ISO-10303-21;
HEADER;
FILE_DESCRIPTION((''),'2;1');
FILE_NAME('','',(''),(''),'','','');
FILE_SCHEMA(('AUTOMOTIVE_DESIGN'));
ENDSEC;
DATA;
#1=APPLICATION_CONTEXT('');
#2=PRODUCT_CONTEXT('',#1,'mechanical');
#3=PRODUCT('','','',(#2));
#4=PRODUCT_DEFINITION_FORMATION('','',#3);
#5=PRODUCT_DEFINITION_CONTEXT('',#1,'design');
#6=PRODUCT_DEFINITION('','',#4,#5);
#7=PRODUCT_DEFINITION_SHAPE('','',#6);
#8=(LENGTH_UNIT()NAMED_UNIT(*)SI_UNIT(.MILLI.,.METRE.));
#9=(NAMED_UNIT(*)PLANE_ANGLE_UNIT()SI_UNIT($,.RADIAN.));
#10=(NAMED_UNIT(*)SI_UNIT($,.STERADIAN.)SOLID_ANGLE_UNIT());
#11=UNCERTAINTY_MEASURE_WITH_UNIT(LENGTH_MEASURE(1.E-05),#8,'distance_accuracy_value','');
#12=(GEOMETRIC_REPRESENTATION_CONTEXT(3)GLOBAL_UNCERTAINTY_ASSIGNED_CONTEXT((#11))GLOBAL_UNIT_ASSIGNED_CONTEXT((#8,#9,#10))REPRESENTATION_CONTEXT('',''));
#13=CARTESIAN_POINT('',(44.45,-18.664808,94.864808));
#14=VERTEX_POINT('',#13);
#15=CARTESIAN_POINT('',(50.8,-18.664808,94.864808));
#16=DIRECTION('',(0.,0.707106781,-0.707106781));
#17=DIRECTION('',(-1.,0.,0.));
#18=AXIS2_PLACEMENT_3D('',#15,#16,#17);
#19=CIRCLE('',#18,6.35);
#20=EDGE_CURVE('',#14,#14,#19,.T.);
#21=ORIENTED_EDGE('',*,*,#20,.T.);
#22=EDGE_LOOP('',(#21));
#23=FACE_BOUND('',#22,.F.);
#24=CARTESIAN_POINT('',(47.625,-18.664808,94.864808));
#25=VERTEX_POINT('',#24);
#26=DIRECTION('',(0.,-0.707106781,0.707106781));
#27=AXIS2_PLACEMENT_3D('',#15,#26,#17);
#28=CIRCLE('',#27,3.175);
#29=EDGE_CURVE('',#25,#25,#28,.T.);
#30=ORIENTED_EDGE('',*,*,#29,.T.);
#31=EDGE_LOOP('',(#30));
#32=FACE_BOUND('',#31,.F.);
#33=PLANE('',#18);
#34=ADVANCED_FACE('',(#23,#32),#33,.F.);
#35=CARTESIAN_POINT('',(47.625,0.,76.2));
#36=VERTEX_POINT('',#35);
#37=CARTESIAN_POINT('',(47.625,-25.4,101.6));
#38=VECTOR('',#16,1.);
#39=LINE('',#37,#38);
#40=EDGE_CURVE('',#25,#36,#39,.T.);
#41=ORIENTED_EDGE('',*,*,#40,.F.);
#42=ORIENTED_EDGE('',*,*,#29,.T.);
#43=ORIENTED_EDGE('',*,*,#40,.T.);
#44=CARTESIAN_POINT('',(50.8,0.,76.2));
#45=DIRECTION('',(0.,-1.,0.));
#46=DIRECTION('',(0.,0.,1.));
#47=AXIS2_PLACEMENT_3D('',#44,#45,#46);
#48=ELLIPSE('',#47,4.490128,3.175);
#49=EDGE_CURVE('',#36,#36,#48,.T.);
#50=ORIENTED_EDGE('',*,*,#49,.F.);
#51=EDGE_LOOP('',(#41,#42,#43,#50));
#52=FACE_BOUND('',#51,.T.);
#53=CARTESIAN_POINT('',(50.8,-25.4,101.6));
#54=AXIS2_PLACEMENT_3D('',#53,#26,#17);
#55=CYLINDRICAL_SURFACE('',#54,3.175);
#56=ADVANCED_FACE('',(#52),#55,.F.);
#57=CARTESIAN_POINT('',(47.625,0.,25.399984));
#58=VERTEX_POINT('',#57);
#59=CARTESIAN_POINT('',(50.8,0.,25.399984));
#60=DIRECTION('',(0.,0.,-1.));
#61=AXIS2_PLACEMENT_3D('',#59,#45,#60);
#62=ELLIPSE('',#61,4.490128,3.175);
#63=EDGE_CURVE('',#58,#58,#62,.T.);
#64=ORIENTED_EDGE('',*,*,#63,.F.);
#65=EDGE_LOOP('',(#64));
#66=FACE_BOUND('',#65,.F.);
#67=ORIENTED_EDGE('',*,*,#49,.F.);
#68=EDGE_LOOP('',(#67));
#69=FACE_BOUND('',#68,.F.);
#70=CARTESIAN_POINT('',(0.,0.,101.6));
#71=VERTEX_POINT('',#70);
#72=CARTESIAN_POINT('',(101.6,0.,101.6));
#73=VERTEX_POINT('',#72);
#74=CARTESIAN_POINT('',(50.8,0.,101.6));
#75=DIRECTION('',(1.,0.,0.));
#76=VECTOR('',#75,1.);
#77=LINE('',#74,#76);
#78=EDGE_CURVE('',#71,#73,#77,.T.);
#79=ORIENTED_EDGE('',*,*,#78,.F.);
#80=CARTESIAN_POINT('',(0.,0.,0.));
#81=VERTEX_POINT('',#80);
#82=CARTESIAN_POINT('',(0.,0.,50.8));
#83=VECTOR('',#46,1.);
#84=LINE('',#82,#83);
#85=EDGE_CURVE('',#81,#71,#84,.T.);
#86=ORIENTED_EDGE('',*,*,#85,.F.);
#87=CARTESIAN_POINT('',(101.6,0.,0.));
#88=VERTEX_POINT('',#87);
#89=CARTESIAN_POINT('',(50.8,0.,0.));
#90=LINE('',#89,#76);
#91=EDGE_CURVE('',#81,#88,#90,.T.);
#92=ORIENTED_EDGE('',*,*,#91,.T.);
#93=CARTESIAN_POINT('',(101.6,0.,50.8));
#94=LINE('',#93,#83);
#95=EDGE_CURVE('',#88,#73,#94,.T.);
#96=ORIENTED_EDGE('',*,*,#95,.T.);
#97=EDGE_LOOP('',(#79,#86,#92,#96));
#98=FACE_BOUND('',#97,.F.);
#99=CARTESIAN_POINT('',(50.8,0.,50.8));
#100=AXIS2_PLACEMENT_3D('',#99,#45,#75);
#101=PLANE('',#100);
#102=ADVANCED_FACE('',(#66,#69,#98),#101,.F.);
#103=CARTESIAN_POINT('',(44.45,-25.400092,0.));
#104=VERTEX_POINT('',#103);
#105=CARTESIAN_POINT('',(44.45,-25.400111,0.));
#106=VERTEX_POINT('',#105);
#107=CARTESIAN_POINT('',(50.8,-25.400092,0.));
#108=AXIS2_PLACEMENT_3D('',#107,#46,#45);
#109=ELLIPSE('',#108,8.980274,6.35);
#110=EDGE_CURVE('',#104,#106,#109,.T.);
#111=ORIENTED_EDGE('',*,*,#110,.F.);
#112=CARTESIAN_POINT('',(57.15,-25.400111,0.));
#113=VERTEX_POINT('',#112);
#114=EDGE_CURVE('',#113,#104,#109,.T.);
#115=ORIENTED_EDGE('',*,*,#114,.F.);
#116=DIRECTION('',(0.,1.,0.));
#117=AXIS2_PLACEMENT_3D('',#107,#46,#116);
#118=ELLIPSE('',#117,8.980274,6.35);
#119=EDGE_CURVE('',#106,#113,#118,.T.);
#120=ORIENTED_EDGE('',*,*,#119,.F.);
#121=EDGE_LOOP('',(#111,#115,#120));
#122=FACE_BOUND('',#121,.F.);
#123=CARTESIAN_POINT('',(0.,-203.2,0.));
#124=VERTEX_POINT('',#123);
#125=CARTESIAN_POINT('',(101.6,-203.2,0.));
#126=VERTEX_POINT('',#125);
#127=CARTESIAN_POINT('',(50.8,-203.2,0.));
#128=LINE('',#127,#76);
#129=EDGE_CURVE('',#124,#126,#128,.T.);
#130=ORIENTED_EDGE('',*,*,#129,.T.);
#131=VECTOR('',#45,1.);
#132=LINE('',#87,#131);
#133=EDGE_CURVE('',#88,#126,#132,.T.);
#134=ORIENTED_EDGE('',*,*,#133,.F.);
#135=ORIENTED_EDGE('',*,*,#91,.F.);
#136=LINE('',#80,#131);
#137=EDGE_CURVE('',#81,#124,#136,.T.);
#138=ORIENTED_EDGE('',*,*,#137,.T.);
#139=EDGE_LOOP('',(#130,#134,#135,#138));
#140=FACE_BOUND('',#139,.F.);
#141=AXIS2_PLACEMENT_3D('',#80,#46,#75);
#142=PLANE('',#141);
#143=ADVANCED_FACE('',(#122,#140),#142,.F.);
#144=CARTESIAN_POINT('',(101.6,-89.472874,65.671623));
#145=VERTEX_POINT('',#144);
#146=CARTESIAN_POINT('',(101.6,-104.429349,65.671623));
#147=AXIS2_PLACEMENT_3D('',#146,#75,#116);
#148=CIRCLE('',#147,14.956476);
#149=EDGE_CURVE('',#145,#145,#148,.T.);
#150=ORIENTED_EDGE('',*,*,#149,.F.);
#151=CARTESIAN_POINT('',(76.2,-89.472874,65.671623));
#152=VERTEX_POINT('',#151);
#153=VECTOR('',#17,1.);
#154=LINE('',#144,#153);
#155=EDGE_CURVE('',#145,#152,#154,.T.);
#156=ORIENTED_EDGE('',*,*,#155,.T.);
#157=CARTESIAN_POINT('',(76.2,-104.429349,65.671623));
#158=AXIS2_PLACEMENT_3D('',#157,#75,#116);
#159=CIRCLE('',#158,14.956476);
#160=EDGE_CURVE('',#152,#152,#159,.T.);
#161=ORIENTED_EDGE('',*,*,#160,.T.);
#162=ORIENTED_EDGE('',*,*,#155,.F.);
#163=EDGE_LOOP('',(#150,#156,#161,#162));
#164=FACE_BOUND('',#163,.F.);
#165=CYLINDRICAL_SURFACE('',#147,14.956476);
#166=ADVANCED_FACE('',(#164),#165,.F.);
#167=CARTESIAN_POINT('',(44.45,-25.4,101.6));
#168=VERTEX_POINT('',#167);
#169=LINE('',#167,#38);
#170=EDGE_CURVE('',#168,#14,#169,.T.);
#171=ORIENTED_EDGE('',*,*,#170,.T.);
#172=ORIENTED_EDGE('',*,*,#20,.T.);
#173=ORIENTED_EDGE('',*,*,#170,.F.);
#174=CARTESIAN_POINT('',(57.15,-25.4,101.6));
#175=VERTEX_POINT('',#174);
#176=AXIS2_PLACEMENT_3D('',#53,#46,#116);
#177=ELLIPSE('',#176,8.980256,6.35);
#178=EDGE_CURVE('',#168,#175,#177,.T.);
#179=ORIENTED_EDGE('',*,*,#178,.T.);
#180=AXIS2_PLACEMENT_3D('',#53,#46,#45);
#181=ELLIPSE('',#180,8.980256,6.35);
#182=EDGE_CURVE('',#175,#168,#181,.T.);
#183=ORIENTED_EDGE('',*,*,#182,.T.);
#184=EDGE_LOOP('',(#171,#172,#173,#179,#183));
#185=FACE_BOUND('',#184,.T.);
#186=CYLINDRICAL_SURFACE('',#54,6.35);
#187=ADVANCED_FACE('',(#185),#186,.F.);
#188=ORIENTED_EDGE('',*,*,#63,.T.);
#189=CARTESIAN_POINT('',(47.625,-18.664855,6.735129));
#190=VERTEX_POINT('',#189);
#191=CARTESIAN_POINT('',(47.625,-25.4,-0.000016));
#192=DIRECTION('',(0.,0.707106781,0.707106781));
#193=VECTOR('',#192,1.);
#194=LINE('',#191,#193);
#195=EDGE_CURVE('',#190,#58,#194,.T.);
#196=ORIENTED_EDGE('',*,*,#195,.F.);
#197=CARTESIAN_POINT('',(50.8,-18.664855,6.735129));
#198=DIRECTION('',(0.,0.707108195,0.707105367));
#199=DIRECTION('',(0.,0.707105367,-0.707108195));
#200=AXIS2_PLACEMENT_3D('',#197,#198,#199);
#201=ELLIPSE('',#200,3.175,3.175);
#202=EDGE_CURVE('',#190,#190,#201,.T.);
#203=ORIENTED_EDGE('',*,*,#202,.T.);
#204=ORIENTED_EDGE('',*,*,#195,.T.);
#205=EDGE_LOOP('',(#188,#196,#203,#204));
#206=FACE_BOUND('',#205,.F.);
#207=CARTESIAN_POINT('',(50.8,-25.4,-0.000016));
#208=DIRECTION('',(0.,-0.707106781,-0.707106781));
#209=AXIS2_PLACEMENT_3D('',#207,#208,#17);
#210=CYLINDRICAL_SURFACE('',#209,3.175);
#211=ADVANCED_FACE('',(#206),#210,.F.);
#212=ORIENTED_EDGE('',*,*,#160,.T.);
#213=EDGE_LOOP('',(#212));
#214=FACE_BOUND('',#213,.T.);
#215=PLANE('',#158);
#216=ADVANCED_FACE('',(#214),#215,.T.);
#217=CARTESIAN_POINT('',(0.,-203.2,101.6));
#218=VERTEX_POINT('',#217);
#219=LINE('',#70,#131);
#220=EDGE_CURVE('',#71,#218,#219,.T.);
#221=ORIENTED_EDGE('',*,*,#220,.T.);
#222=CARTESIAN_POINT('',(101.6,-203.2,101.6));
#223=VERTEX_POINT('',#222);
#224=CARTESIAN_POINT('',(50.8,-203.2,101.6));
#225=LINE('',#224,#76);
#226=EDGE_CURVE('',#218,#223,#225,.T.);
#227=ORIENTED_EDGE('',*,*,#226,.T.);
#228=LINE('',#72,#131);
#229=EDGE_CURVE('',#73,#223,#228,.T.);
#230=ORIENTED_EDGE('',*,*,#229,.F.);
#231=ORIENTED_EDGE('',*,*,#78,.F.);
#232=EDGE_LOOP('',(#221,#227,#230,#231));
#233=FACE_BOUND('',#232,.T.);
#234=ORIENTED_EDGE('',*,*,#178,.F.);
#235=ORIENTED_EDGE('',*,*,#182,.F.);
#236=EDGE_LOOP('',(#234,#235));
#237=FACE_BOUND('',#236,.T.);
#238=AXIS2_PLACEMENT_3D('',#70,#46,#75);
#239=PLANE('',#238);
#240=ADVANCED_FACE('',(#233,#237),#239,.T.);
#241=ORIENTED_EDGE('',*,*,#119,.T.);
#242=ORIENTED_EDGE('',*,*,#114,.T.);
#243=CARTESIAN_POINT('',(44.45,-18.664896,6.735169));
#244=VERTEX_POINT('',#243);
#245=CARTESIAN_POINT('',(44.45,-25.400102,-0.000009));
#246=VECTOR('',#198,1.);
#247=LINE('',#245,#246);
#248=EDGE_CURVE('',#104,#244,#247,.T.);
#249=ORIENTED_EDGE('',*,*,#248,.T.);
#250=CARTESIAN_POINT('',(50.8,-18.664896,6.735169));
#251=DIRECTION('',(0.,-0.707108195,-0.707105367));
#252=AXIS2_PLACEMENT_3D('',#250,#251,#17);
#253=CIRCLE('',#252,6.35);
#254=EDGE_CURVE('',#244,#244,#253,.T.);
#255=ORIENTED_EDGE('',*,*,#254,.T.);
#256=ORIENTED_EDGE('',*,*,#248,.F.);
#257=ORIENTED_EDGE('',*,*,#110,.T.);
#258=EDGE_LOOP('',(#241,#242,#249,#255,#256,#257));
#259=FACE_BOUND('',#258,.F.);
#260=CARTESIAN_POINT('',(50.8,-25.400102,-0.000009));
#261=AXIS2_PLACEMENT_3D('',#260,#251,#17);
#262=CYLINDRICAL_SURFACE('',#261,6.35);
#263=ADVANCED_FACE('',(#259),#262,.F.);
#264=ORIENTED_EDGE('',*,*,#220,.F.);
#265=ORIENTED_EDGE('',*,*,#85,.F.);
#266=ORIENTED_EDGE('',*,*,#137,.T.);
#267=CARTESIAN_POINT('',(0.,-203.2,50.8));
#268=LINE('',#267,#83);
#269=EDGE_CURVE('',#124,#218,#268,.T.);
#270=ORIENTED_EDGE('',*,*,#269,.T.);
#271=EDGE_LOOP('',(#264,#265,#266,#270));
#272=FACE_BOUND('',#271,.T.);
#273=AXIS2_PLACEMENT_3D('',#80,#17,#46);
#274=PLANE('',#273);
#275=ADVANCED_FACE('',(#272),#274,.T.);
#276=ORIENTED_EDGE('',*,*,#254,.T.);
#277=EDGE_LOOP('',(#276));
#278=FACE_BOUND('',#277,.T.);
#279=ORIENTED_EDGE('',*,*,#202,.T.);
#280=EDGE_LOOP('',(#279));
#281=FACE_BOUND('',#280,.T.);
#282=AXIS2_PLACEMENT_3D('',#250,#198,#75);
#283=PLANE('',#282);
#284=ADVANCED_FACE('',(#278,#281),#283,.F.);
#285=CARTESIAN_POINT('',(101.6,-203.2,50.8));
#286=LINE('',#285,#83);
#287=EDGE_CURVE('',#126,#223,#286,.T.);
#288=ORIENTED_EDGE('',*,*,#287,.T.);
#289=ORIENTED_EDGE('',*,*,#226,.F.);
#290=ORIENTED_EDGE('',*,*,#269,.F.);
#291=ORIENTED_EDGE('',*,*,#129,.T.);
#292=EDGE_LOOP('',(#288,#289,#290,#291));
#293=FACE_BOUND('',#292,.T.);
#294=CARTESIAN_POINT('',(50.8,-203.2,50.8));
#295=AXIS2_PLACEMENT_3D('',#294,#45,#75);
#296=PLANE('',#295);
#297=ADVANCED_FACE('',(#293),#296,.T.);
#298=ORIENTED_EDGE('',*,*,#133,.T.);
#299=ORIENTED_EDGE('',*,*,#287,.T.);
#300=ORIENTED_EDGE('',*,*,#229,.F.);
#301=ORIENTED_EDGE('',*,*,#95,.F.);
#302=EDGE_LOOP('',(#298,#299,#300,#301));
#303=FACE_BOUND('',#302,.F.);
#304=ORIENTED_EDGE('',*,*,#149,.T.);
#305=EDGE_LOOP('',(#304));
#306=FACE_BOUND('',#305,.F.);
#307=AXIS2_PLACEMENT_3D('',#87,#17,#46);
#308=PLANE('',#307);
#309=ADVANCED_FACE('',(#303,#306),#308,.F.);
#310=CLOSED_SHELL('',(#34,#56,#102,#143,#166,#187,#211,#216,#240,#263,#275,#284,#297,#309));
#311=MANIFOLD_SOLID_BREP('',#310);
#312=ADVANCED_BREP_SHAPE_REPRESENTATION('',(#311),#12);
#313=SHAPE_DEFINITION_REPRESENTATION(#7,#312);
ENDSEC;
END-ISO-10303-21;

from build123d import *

# Parameters (mm, degrees)
F0_W          = 101.6
F0_H          = 101.6
F1_DEPTH      = 203.2
F4_R          = 3.175
F5_DEPTH      = 89.8035612107
F4_R_2        = 6.35
F6_DEPTH      = 9.525
F6_DEPTH_BACK = 125.724585695
F8_R          = 14.9564756193
F9_DEPTH      = 25.4


# Not quite as in the source:
# - a pattern or mirror of a feature is missing from the dataset's text; its kind, count and spacing are read off the source's solid


with BuildPart() as f1:
    # F0 (on Front) → F1 (new body)
    with BuildSketch(Plane.XZ):
        with Locations((50.8, 50.8)):
            Rectangle(F0_W, F0_H)
    extrude(amount=F1_DEPTH)

    # F4 (on line) → F5 (cut, through all)
    with BuildSketch(Plane(origin=(0, -63.5, 63.5), x_dir=(-1, 0, 0), z_dir=(0, 0.7071067812, -0.7071067812))):
        with Locations((-50.8, 53.8815367264)):
            Circle(F4_R)
    f5 = extrude(amount=F5_DEPTH, mode=Mode.SUBTRACT)

    # F5_copies: F5 across plane
    add(f5.mirror(Plane(origin=(0, 1.2e-05, 50.799992), x_dir=(-1, 0, 0), z_dir=(0, 0, -1))), mode=Mode.SUBTRACT)

    # F4 (on line) → F6 (cut, two sides)
    with BuildSketch(Plane(origin=(0, -63.5, 63.5), x_dir=(-1, 0, 0), z_dir=(0, 0.7071067812, -0.7071067812))) as f6_sk:
        with Locations((-50.8, 53.8815367264)):
            Circle(F4_R_2)
        with Locations((-50.8, 53.8815367264)):
            Circle(F4_R, mode=Mode.SUBTRACT)
        with Locations((-50.8, 53.8815367264)):
            Circle(F4_R)
    f6 = extrude(amount=F6_DEPTH, mode=Mode.SUBTRACT) + extrude(f6_sk.sketch, amount=-F6_DEPTH_BACK, mode=Mode.SUBTRACT)

    # F6_copies: F6 across plane
    add(f6.mirror(Plane(origin=(0, 2.8e-05, 50.79997), x_dir=(0, -1, 1e-06), z_dir=(0, -1e-06, -1))), mode=Mode.SUBTRACT)

    # F8 (on face) → F9 (cut)
    with BuildSketch(Plane.YZ.offset(101.6)):
        with Locations((-104.4293493032, 65.6716227531)):
            Circle(F8_R)
    extrude(amount=-F9_DEPTH, mode=Mode.SUBTRACT)


solid = f1.part
